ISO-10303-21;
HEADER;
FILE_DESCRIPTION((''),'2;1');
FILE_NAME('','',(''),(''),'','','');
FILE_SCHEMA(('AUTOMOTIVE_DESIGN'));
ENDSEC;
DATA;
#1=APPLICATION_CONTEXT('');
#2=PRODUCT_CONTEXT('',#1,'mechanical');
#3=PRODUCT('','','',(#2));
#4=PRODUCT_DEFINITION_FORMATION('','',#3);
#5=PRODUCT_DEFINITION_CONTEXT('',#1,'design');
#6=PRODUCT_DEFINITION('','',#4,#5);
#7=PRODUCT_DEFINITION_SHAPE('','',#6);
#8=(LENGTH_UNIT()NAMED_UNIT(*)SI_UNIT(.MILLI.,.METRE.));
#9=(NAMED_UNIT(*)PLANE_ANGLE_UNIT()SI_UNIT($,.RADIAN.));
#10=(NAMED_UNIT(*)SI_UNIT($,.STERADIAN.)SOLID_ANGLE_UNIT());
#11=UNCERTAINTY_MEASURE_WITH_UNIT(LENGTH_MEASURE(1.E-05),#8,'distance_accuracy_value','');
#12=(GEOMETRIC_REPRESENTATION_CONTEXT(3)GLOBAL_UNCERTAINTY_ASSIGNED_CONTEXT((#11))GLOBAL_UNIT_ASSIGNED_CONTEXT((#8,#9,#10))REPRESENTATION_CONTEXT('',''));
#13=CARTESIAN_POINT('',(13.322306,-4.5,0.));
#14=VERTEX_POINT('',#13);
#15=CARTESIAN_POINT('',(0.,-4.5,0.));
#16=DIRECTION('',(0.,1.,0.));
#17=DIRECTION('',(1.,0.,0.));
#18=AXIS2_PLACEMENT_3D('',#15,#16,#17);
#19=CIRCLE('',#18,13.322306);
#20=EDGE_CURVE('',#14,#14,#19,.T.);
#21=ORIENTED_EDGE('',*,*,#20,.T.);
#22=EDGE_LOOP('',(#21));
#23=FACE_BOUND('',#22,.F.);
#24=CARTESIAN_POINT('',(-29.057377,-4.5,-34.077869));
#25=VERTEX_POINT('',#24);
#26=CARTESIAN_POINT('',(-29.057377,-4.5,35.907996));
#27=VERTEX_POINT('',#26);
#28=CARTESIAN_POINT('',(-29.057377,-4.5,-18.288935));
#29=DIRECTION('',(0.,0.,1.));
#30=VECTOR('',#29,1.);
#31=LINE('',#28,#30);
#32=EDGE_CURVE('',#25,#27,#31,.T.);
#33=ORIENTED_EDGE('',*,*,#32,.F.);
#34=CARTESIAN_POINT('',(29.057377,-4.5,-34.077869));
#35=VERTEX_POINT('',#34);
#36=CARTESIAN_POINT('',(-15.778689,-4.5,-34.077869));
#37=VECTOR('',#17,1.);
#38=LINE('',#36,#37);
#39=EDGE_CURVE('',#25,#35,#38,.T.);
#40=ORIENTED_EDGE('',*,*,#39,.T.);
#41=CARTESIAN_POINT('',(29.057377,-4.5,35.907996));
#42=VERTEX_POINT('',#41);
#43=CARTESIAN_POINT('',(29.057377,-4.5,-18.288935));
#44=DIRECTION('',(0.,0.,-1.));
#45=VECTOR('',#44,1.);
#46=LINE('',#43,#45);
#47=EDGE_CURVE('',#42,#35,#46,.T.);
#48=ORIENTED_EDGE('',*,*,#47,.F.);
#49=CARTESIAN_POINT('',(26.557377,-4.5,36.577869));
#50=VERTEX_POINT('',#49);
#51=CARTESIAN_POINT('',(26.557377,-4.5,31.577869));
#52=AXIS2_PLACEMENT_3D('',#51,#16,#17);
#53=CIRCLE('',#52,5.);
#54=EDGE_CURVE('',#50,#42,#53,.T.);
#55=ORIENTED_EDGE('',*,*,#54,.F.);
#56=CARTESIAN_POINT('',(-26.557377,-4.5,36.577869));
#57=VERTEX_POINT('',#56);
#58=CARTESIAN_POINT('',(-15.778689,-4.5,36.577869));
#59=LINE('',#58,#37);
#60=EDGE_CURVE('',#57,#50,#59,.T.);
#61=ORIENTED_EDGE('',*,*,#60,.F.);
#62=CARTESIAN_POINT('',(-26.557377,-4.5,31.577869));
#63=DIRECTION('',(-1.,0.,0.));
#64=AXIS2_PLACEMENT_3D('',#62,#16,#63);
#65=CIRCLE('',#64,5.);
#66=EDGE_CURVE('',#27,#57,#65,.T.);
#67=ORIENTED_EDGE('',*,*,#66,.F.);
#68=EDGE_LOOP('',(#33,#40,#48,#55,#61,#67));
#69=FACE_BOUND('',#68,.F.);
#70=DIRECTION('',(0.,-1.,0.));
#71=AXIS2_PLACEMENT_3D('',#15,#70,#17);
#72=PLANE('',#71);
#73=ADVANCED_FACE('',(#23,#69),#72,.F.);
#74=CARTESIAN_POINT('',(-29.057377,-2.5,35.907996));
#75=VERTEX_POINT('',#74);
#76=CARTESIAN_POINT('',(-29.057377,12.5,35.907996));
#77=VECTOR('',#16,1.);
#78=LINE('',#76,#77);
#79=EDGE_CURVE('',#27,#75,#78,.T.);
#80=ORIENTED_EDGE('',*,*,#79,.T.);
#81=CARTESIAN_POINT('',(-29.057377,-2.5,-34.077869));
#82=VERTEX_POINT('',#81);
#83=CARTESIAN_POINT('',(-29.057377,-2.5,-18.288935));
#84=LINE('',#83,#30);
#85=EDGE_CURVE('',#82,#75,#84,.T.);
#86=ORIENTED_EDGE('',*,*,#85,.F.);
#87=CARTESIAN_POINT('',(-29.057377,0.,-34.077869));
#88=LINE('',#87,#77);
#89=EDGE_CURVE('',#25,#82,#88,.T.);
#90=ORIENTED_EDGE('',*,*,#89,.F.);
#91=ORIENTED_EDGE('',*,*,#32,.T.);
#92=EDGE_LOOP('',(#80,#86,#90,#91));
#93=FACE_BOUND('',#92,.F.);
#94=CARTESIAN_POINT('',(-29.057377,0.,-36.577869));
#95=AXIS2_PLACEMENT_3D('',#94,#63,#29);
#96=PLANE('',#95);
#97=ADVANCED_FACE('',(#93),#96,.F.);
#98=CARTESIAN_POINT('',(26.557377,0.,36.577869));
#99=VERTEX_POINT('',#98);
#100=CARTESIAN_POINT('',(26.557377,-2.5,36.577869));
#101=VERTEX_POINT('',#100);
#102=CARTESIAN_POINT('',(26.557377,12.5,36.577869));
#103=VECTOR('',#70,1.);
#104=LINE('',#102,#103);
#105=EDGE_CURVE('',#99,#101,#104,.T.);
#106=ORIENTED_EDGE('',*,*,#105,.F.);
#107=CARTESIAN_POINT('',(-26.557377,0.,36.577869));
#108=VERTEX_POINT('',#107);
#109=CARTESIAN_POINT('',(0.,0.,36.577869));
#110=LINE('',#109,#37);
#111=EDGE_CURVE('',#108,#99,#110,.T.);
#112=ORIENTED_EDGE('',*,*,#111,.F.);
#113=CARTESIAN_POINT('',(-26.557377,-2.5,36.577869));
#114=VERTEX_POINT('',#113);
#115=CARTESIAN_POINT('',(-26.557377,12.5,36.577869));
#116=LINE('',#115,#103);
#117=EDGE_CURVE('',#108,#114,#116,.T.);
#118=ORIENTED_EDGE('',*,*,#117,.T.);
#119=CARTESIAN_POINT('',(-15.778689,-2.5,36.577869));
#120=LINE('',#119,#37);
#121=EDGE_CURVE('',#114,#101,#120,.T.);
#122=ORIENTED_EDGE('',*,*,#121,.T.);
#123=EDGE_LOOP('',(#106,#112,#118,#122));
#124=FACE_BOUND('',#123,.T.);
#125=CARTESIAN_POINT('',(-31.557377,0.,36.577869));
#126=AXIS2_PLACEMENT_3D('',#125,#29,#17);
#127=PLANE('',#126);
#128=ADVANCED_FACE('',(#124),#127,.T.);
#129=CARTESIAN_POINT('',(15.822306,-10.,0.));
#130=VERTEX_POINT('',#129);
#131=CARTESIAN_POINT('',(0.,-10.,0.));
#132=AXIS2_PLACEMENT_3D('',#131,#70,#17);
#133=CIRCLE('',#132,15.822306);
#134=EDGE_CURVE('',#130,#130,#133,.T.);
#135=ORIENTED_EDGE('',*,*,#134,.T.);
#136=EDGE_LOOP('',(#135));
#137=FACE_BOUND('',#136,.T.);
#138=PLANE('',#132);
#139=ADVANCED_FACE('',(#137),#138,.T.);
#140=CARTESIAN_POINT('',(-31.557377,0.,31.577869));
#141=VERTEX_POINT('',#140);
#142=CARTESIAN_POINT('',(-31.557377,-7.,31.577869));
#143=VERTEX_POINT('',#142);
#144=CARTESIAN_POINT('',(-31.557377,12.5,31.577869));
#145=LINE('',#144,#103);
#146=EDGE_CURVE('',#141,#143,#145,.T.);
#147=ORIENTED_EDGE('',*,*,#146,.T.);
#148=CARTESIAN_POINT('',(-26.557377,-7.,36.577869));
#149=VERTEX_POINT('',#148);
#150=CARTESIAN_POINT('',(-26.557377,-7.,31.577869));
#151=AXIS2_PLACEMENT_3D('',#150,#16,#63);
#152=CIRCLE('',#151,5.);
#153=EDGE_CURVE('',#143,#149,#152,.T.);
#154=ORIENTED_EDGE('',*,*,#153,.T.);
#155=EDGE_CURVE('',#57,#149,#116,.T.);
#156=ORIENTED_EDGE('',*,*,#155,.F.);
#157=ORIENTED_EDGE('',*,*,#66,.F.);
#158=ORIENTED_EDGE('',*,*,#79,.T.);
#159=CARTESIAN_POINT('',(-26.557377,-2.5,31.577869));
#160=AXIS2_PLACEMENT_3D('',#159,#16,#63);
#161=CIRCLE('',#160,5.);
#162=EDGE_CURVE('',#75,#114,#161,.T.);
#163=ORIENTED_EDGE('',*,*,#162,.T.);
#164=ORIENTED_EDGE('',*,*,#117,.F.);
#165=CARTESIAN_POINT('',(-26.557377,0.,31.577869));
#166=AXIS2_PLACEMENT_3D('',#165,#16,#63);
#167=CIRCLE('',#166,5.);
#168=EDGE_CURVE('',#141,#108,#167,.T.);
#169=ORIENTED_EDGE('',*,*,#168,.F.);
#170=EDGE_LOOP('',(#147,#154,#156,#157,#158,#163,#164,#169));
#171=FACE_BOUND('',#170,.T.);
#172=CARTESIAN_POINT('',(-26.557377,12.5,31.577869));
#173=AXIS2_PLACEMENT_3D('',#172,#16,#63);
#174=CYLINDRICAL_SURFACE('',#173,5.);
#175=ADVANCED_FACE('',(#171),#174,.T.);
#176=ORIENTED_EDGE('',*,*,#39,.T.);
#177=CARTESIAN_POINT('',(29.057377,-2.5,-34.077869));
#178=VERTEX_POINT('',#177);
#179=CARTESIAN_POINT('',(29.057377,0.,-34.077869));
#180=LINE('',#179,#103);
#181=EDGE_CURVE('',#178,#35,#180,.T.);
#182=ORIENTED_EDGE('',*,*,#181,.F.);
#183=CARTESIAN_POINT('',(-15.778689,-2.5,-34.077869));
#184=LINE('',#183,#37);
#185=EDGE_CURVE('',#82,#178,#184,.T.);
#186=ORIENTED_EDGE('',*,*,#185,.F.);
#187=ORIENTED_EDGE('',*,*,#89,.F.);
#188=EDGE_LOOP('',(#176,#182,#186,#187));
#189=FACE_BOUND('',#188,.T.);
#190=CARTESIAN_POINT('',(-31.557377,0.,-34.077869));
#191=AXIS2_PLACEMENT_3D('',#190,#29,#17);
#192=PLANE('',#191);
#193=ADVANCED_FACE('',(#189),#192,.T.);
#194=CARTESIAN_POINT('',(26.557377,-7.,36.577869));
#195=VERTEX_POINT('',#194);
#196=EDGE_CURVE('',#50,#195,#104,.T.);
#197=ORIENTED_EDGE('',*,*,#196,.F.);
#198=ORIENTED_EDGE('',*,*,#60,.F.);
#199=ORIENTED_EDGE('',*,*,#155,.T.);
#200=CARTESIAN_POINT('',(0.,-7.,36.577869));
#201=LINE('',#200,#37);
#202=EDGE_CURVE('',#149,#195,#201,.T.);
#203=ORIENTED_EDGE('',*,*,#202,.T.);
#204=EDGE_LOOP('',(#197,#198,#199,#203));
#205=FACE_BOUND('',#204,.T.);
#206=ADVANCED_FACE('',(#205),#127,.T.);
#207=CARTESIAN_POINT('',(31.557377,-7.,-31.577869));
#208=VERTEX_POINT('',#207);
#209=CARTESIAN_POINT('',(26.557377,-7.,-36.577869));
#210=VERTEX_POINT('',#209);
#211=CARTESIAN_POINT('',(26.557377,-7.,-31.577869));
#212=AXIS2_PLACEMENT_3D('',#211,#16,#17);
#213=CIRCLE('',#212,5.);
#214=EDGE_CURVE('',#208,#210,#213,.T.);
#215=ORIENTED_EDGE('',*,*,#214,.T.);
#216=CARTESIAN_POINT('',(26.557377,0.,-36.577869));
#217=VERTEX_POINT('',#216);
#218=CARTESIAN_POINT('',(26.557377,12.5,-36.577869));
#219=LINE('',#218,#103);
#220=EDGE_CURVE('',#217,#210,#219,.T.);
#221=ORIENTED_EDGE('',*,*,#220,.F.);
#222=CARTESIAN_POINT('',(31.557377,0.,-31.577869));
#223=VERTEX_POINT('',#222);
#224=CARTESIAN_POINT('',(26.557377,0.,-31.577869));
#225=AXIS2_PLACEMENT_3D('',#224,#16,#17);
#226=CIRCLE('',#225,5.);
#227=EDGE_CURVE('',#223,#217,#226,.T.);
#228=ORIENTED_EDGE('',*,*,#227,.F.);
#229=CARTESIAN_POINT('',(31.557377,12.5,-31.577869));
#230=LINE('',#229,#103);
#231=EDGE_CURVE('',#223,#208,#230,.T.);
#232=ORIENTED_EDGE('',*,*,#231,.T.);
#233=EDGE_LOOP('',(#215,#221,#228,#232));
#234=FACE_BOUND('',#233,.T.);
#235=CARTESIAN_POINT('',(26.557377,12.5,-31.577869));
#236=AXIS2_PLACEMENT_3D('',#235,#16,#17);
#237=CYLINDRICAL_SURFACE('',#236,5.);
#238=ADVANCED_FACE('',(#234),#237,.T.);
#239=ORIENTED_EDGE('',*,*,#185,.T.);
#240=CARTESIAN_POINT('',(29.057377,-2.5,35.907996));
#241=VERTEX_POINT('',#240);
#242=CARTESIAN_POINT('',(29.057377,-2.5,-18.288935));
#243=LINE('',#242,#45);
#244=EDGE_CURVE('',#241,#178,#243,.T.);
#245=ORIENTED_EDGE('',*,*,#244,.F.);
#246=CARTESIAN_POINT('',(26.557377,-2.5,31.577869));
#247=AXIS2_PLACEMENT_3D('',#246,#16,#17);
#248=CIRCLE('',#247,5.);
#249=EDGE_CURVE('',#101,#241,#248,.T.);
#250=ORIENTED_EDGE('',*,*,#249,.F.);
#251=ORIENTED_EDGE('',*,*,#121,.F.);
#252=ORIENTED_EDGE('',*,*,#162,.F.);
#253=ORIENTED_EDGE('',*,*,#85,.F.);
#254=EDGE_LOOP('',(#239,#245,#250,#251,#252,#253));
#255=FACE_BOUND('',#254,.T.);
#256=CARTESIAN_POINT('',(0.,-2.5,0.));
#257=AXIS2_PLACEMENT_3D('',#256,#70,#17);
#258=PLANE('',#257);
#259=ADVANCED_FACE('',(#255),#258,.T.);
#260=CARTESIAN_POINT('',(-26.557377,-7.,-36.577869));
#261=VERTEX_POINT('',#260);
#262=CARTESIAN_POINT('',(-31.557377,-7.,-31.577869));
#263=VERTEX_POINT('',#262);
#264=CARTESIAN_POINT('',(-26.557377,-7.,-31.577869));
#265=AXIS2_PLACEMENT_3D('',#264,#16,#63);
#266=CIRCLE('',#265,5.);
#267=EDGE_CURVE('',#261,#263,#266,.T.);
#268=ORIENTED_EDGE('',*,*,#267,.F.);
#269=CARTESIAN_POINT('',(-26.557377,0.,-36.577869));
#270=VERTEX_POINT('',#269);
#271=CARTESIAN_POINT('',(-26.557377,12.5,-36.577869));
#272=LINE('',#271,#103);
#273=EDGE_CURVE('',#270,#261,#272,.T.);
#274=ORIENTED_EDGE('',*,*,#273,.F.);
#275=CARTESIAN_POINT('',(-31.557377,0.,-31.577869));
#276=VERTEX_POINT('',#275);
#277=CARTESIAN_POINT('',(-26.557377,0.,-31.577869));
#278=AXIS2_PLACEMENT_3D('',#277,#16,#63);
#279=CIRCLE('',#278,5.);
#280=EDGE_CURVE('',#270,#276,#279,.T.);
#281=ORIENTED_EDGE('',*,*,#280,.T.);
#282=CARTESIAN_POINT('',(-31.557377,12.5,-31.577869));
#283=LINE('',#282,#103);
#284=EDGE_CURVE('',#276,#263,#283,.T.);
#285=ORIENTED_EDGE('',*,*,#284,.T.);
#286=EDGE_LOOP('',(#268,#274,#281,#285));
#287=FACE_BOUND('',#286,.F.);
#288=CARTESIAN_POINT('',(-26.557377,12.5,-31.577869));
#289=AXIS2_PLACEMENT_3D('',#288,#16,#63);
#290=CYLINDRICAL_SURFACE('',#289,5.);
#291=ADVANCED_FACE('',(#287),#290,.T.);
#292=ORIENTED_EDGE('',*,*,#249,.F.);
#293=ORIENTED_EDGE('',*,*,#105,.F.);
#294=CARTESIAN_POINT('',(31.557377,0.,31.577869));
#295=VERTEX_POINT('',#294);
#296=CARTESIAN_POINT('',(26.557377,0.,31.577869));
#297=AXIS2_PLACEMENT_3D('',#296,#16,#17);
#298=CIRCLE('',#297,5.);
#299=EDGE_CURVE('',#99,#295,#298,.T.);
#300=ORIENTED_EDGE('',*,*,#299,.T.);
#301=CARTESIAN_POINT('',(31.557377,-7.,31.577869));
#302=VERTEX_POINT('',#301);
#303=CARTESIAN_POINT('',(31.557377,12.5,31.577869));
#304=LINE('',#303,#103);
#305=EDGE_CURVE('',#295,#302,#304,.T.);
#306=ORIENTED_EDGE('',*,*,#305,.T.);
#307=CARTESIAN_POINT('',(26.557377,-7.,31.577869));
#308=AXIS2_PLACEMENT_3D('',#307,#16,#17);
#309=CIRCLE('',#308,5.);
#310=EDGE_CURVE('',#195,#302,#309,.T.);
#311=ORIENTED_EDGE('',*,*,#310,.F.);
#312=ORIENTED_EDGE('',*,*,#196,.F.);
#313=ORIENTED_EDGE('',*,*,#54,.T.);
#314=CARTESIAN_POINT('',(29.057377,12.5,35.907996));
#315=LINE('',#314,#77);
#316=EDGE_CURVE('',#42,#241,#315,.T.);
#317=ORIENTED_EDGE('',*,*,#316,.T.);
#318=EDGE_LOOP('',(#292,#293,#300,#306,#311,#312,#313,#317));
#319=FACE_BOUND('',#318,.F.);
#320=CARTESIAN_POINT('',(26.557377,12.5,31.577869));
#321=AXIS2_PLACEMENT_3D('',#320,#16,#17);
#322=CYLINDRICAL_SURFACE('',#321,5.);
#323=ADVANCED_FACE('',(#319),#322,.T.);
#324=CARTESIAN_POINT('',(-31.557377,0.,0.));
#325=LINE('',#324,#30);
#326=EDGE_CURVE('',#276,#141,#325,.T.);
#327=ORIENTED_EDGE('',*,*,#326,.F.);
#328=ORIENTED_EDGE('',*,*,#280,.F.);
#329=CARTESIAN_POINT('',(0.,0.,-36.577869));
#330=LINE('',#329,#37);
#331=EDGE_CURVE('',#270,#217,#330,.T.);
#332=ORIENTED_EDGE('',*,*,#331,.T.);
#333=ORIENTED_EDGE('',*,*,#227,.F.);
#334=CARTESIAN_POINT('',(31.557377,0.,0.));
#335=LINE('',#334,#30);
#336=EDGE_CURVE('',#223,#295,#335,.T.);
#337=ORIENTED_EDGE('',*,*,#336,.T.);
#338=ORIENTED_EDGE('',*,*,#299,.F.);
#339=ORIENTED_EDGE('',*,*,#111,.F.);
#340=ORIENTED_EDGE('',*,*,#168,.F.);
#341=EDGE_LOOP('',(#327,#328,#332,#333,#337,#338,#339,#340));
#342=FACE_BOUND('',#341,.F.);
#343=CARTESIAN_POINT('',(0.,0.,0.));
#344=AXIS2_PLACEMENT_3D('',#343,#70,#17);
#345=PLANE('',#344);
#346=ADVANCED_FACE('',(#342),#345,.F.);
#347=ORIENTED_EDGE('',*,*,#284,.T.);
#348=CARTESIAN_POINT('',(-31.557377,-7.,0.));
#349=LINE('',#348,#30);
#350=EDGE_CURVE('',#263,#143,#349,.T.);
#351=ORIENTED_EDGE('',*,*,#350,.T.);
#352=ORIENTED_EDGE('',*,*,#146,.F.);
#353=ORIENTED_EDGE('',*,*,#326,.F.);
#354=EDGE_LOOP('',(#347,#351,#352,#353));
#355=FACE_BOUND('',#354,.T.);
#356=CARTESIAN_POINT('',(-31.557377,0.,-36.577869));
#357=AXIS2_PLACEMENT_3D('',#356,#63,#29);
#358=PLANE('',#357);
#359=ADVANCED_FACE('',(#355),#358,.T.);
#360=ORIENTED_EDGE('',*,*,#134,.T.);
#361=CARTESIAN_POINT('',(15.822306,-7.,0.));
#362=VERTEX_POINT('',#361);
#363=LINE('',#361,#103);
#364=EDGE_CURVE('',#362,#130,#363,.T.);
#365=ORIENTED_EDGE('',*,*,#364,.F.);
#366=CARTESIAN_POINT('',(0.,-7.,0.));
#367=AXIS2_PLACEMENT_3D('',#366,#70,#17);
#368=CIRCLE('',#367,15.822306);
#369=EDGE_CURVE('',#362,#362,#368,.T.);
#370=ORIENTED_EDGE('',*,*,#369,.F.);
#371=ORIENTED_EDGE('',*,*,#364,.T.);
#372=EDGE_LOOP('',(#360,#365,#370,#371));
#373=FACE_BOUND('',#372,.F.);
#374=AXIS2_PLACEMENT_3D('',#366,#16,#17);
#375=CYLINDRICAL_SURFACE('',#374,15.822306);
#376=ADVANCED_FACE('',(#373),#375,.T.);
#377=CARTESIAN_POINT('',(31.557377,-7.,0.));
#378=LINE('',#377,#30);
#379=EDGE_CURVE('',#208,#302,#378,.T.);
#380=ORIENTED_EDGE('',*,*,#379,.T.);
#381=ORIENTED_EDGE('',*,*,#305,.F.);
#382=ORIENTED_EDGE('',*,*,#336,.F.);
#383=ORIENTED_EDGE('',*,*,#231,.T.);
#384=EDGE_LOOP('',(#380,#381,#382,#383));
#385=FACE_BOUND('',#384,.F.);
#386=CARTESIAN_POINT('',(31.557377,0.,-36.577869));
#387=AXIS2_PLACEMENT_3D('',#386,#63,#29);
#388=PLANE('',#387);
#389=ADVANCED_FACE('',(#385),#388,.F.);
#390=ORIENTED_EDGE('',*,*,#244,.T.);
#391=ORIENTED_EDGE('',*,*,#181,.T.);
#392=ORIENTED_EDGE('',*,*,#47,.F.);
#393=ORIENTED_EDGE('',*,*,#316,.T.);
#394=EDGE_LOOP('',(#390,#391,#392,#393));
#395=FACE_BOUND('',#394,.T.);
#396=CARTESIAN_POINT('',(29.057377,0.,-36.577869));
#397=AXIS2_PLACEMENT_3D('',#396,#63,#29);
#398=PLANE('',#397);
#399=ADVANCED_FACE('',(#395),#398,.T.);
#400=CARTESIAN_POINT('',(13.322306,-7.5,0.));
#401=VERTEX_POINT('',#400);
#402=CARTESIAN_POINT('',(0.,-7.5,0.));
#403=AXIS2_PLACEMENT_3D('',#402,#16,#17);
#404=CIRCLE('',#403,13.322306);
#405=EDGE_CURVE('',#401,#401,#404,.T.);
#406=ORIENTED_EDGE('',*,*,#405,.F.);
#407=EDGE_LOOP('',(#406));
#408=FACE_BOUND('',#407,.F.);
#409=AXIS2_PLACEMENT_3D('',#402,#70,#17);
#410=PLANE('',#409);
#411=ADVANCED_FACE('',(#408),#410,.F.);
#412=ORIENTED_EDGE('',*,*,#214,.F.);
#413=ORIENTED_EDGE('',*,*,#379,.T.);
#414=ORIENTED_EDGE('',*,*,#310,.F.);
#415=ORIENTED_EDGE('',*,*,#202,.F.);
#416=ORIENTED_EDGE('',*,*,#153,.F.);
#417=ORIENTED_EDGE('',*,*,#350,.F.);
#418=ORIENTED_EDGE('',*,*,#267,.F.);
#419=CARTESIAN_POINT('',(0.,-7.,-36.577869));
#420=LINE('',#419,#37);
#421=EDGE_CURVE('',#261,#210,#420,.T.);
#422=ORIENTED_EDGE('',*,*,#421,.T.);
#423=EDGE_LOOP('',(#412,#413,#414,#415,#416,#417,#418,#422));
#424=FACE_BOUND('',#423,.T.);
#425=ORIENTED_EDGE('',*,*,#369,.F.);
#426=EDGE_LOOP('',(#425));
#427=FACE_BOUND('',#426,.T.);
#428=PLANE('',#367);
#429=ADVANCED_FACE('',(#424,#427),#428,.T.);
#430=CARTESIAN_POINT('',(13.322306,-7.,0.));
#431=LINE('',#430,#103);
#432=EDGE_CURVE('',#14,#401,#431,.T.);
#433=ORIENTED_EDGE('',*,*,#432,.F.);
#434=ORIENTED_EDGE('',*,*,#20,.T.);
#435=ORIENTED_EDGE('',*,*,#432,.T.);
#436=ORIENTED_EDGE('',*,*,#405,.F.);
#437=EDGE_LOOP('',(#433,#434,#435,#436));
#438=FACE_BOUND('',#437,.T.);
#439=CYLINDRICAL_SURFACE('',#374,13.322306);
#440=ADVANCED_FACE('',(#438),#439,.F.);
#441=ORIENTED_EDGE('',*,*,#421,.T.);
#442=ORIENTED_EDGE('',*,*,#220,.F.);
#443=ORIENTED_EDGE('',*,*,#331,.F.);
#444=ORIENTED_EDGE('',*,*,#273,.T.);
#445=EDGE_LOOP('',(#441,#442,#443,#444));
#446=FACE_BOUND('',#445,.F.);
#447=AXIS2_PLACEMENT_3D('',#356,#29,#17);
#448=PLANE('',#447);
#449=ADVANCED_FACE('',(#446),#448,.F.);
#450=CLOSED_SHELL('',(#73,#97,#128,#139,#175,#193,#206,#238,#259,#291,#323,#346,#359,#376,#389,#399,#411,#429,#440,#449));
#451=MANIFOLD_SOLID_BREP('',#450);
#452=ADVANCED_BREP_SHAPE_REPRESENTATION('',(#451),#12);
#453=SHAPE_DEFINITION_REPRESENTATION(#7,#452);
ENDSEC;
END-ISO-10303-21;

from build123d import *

# Parameters (mm, degrees)
F0_W        = 63.1147548556
F0_H        = 73.1557384133
F1_DEPTH    = 7
F2_R        = 15.8223055834
F3_DEPTH    = 3
F4_T        = -2.5
F5_T1_DEPTH = 32


# Not quite as in the source:
# - a fillet or chamfer that OpenCascade refuses, or shapes differently, is made with other operations: its cross-section is extruded or revolved along the edge and cut away or added


with BuildPart() as f1:
    # F0 (on Front) → F1 (new body)
    with BuildSketch(Plane.XZ):
        Rectangle(F0_W, F0_H)
    extrude(amount=F1_DEPTH)

    # F2 (on face) → F3 (join)
    with BuildSketch(Plane.XZ.offset(7)):
        Circle(F2_R)
    extrude(amount=F3_DEPTH)

    # F4
    f4_openings = [f1.faces().sort_by_distance(p)[0] for p in [
        (0, -3.5, 36.577869),
    ]]
    offset(amount=F4_T, openings=f4_openings, kind=Kind.INTERSECTION)

    # F5: fillet of radius 5 on 4 edges, made by hand

    # F5_s2 → F5_t1 (cut)
    with BuildSketch(Plane.XZ.offset(-12.5)):
        with BuildLine():
            ThreePointArc((31.5573774278, 31.5778692067), (30.0929113337, 35.1134031126), (26.5573774278, 36.5778692067))
            Line((26.5573774278, 36.5778692067), (31.5573774278, 36.5778692067))
            Line((31.5573774278, 36.5778692067), (31.5573774278, 31.5778692067))
        make_face()
        with BuildLine():
            ThreePointArc((31.5573774278, -31.5778692067), (30.0929113337, -35.1134031126), (26.5573774278, -36.5778692067))
            Line((26.5573774278, -36.5778692067), (31.5573774278, -36.5778692067))
            Line((31.5573774278, -36.5778692067), (31.5573774278, -31.5778692067))
        make_face()
        with BuildLine():
            ThreePointArc((-31.5573774278, -31.5778692067), (-30.0929113337, -35.1134031126), (-26.5573774278, -36.5778692067))
            Line((-26.5573774278, -36.5778692067), (-31.5573774278, -36.5778692067))
            Line((-31.5573774278, -36.5778692067), (-31.5573774278, -31.5778692067))
        make_face()
        with BuildLine():
            ThreePointArc((-31.5573774278, 31.5778692067), (-30.0929113337, 35.1134031126), (-26.5573774278, 36.5778692067))
            Line((-26.5573774278, 36.5778692067), (-31.5573774278, 36.5778692067))
            Line((-31.5573774278, 36.5778692067), (-31.5573774278, 31.5778692067))
        make_face()
    extrude(amount=F5_T1_DEPTH, mode=Mode.SUBTRACT)


solid = f1.part
